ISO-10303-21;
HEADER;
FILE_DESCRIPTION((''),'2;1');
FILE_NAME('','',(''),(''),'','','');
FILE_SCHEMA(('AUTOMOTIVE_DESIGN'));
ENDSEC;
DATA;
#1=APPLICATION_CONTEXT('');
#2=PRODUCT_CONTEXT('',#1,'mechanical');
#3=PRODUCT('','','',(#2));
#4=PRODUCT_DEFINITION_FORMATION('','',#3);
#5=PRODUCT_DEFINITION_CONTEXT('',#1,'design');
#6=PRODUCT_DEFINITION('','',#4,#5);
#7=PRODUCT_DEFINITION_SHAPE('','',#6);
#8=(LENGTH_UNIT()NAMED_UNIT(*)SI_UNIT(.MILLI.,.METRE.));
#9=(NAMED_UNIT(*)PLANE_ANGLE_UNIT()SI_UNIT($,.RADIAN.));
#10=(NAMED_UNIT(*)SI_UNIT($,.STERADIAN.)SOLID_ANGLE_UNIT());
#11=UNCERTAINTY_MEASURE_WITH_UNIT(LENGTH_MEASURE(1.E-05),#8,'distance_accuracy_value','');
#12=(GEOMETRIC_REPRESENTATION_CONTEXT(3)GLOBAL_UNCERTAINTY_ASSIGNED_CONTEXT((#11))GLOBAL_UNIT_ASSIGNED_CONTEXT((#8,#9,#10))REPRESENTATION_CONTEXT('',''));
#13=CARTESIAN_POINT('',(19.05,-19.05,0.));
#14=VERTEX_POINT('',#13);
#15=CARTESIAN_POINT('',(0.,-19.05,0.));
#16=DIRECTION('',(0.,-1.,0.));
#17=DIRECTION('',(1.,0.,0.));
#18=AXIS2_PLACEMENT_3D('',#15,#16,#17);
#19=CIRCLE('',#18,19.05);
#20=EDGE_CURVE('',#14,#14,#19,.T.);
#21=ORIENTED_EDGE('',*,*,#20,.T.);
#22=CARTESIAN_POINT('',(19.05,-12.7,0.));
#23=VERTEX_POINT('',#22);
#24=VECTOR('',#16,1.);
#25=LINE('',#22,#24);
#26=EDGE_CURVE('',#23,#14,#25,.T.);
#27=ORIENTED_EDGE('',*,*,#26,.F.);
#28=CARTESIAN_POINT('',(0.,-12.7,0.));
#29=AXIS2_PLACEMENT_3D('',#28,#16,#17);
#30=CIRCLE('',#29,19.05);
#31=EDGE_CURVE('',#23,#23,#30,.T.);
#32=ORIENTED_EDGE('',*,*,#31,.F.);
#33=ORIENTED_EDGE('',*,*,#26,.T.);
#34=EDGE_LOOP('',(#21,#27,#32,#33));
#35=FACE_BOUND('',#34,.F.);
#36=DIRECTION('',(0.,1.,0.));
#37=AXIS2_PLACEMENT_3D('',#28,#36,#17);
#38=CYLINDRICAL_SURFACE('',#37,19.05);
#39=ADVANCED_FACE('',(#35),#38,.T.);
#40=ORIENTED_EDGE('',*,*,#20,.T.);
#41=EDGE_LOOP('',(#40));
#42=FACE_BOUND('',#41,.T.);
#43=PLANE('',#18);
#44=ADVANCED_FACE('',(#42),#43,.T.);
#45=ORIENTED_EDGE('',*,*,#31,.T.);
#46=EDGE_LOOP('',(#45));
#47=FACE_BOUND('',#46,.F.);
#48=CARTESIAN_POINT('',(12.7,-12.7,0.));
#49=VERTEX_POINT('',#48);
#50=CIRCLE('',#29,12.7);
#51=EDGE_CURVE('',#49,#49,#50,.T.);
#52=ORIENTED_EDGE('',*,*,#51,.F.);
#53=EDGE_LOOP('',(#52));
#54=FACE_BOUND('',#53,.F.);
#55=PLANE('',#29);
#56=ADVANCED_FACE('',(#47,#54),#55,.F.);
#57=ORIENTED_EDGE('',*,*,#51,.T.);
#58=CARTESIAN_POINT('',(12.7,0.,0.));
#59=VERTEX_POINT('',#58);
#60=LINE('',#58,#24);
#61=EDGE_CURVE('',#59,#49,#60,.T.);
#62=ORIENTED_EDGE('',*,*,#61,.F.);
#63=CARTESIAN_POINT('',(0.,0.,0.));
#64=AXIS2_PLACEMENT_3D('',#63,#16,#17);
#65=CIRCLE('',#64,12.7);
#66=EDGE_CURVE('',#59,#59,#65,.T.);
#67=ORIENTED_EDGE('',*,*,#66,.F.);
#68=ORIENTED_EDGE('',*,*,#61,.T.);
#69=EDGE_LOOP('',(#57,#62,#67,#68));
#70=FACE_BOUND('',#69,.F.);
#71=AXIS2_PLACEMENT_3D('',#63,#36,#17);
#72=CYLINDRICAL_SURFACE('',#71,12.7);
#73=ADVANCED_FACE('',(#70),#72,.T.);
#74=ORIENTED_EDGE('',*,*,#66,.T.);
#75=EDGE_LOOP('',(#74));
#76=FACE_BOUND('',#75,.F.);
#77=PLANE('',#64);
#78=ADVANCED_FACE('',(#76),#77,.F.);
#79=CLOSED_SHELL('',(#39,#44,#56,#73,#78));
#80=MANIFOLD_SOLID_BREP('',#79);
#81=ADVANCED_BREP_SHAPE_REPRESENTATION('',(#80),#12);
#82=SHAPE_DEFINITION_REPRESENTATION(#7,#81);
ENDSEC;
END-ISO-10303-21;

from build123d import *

# Parameters (mm, degrees)
F0_R     = 12.7
F1_DEPTH = 12.7
F2_R     = 19.05
F2_R_2   = 12.7
F3_DEPTH = 6.35


with BuildPart() as f1:
    # F0 (on Front) → F1 (new body)
    with BuildSketch(Plane.XZ):
        Circle(F0_R)
    extrude(amount=F1_DEPTH)

    # F2 (on face) → F3 (join)
    with BuildSketch(Plane.XZ.offset(12.7)):
        Circle(F2_R)
        Circle(F2_R_2, mode=Mode.SUBTRACT)
        Circle(F2_R_2)
    extrude(amount=F3_DEPTH)


solid = f1.part
